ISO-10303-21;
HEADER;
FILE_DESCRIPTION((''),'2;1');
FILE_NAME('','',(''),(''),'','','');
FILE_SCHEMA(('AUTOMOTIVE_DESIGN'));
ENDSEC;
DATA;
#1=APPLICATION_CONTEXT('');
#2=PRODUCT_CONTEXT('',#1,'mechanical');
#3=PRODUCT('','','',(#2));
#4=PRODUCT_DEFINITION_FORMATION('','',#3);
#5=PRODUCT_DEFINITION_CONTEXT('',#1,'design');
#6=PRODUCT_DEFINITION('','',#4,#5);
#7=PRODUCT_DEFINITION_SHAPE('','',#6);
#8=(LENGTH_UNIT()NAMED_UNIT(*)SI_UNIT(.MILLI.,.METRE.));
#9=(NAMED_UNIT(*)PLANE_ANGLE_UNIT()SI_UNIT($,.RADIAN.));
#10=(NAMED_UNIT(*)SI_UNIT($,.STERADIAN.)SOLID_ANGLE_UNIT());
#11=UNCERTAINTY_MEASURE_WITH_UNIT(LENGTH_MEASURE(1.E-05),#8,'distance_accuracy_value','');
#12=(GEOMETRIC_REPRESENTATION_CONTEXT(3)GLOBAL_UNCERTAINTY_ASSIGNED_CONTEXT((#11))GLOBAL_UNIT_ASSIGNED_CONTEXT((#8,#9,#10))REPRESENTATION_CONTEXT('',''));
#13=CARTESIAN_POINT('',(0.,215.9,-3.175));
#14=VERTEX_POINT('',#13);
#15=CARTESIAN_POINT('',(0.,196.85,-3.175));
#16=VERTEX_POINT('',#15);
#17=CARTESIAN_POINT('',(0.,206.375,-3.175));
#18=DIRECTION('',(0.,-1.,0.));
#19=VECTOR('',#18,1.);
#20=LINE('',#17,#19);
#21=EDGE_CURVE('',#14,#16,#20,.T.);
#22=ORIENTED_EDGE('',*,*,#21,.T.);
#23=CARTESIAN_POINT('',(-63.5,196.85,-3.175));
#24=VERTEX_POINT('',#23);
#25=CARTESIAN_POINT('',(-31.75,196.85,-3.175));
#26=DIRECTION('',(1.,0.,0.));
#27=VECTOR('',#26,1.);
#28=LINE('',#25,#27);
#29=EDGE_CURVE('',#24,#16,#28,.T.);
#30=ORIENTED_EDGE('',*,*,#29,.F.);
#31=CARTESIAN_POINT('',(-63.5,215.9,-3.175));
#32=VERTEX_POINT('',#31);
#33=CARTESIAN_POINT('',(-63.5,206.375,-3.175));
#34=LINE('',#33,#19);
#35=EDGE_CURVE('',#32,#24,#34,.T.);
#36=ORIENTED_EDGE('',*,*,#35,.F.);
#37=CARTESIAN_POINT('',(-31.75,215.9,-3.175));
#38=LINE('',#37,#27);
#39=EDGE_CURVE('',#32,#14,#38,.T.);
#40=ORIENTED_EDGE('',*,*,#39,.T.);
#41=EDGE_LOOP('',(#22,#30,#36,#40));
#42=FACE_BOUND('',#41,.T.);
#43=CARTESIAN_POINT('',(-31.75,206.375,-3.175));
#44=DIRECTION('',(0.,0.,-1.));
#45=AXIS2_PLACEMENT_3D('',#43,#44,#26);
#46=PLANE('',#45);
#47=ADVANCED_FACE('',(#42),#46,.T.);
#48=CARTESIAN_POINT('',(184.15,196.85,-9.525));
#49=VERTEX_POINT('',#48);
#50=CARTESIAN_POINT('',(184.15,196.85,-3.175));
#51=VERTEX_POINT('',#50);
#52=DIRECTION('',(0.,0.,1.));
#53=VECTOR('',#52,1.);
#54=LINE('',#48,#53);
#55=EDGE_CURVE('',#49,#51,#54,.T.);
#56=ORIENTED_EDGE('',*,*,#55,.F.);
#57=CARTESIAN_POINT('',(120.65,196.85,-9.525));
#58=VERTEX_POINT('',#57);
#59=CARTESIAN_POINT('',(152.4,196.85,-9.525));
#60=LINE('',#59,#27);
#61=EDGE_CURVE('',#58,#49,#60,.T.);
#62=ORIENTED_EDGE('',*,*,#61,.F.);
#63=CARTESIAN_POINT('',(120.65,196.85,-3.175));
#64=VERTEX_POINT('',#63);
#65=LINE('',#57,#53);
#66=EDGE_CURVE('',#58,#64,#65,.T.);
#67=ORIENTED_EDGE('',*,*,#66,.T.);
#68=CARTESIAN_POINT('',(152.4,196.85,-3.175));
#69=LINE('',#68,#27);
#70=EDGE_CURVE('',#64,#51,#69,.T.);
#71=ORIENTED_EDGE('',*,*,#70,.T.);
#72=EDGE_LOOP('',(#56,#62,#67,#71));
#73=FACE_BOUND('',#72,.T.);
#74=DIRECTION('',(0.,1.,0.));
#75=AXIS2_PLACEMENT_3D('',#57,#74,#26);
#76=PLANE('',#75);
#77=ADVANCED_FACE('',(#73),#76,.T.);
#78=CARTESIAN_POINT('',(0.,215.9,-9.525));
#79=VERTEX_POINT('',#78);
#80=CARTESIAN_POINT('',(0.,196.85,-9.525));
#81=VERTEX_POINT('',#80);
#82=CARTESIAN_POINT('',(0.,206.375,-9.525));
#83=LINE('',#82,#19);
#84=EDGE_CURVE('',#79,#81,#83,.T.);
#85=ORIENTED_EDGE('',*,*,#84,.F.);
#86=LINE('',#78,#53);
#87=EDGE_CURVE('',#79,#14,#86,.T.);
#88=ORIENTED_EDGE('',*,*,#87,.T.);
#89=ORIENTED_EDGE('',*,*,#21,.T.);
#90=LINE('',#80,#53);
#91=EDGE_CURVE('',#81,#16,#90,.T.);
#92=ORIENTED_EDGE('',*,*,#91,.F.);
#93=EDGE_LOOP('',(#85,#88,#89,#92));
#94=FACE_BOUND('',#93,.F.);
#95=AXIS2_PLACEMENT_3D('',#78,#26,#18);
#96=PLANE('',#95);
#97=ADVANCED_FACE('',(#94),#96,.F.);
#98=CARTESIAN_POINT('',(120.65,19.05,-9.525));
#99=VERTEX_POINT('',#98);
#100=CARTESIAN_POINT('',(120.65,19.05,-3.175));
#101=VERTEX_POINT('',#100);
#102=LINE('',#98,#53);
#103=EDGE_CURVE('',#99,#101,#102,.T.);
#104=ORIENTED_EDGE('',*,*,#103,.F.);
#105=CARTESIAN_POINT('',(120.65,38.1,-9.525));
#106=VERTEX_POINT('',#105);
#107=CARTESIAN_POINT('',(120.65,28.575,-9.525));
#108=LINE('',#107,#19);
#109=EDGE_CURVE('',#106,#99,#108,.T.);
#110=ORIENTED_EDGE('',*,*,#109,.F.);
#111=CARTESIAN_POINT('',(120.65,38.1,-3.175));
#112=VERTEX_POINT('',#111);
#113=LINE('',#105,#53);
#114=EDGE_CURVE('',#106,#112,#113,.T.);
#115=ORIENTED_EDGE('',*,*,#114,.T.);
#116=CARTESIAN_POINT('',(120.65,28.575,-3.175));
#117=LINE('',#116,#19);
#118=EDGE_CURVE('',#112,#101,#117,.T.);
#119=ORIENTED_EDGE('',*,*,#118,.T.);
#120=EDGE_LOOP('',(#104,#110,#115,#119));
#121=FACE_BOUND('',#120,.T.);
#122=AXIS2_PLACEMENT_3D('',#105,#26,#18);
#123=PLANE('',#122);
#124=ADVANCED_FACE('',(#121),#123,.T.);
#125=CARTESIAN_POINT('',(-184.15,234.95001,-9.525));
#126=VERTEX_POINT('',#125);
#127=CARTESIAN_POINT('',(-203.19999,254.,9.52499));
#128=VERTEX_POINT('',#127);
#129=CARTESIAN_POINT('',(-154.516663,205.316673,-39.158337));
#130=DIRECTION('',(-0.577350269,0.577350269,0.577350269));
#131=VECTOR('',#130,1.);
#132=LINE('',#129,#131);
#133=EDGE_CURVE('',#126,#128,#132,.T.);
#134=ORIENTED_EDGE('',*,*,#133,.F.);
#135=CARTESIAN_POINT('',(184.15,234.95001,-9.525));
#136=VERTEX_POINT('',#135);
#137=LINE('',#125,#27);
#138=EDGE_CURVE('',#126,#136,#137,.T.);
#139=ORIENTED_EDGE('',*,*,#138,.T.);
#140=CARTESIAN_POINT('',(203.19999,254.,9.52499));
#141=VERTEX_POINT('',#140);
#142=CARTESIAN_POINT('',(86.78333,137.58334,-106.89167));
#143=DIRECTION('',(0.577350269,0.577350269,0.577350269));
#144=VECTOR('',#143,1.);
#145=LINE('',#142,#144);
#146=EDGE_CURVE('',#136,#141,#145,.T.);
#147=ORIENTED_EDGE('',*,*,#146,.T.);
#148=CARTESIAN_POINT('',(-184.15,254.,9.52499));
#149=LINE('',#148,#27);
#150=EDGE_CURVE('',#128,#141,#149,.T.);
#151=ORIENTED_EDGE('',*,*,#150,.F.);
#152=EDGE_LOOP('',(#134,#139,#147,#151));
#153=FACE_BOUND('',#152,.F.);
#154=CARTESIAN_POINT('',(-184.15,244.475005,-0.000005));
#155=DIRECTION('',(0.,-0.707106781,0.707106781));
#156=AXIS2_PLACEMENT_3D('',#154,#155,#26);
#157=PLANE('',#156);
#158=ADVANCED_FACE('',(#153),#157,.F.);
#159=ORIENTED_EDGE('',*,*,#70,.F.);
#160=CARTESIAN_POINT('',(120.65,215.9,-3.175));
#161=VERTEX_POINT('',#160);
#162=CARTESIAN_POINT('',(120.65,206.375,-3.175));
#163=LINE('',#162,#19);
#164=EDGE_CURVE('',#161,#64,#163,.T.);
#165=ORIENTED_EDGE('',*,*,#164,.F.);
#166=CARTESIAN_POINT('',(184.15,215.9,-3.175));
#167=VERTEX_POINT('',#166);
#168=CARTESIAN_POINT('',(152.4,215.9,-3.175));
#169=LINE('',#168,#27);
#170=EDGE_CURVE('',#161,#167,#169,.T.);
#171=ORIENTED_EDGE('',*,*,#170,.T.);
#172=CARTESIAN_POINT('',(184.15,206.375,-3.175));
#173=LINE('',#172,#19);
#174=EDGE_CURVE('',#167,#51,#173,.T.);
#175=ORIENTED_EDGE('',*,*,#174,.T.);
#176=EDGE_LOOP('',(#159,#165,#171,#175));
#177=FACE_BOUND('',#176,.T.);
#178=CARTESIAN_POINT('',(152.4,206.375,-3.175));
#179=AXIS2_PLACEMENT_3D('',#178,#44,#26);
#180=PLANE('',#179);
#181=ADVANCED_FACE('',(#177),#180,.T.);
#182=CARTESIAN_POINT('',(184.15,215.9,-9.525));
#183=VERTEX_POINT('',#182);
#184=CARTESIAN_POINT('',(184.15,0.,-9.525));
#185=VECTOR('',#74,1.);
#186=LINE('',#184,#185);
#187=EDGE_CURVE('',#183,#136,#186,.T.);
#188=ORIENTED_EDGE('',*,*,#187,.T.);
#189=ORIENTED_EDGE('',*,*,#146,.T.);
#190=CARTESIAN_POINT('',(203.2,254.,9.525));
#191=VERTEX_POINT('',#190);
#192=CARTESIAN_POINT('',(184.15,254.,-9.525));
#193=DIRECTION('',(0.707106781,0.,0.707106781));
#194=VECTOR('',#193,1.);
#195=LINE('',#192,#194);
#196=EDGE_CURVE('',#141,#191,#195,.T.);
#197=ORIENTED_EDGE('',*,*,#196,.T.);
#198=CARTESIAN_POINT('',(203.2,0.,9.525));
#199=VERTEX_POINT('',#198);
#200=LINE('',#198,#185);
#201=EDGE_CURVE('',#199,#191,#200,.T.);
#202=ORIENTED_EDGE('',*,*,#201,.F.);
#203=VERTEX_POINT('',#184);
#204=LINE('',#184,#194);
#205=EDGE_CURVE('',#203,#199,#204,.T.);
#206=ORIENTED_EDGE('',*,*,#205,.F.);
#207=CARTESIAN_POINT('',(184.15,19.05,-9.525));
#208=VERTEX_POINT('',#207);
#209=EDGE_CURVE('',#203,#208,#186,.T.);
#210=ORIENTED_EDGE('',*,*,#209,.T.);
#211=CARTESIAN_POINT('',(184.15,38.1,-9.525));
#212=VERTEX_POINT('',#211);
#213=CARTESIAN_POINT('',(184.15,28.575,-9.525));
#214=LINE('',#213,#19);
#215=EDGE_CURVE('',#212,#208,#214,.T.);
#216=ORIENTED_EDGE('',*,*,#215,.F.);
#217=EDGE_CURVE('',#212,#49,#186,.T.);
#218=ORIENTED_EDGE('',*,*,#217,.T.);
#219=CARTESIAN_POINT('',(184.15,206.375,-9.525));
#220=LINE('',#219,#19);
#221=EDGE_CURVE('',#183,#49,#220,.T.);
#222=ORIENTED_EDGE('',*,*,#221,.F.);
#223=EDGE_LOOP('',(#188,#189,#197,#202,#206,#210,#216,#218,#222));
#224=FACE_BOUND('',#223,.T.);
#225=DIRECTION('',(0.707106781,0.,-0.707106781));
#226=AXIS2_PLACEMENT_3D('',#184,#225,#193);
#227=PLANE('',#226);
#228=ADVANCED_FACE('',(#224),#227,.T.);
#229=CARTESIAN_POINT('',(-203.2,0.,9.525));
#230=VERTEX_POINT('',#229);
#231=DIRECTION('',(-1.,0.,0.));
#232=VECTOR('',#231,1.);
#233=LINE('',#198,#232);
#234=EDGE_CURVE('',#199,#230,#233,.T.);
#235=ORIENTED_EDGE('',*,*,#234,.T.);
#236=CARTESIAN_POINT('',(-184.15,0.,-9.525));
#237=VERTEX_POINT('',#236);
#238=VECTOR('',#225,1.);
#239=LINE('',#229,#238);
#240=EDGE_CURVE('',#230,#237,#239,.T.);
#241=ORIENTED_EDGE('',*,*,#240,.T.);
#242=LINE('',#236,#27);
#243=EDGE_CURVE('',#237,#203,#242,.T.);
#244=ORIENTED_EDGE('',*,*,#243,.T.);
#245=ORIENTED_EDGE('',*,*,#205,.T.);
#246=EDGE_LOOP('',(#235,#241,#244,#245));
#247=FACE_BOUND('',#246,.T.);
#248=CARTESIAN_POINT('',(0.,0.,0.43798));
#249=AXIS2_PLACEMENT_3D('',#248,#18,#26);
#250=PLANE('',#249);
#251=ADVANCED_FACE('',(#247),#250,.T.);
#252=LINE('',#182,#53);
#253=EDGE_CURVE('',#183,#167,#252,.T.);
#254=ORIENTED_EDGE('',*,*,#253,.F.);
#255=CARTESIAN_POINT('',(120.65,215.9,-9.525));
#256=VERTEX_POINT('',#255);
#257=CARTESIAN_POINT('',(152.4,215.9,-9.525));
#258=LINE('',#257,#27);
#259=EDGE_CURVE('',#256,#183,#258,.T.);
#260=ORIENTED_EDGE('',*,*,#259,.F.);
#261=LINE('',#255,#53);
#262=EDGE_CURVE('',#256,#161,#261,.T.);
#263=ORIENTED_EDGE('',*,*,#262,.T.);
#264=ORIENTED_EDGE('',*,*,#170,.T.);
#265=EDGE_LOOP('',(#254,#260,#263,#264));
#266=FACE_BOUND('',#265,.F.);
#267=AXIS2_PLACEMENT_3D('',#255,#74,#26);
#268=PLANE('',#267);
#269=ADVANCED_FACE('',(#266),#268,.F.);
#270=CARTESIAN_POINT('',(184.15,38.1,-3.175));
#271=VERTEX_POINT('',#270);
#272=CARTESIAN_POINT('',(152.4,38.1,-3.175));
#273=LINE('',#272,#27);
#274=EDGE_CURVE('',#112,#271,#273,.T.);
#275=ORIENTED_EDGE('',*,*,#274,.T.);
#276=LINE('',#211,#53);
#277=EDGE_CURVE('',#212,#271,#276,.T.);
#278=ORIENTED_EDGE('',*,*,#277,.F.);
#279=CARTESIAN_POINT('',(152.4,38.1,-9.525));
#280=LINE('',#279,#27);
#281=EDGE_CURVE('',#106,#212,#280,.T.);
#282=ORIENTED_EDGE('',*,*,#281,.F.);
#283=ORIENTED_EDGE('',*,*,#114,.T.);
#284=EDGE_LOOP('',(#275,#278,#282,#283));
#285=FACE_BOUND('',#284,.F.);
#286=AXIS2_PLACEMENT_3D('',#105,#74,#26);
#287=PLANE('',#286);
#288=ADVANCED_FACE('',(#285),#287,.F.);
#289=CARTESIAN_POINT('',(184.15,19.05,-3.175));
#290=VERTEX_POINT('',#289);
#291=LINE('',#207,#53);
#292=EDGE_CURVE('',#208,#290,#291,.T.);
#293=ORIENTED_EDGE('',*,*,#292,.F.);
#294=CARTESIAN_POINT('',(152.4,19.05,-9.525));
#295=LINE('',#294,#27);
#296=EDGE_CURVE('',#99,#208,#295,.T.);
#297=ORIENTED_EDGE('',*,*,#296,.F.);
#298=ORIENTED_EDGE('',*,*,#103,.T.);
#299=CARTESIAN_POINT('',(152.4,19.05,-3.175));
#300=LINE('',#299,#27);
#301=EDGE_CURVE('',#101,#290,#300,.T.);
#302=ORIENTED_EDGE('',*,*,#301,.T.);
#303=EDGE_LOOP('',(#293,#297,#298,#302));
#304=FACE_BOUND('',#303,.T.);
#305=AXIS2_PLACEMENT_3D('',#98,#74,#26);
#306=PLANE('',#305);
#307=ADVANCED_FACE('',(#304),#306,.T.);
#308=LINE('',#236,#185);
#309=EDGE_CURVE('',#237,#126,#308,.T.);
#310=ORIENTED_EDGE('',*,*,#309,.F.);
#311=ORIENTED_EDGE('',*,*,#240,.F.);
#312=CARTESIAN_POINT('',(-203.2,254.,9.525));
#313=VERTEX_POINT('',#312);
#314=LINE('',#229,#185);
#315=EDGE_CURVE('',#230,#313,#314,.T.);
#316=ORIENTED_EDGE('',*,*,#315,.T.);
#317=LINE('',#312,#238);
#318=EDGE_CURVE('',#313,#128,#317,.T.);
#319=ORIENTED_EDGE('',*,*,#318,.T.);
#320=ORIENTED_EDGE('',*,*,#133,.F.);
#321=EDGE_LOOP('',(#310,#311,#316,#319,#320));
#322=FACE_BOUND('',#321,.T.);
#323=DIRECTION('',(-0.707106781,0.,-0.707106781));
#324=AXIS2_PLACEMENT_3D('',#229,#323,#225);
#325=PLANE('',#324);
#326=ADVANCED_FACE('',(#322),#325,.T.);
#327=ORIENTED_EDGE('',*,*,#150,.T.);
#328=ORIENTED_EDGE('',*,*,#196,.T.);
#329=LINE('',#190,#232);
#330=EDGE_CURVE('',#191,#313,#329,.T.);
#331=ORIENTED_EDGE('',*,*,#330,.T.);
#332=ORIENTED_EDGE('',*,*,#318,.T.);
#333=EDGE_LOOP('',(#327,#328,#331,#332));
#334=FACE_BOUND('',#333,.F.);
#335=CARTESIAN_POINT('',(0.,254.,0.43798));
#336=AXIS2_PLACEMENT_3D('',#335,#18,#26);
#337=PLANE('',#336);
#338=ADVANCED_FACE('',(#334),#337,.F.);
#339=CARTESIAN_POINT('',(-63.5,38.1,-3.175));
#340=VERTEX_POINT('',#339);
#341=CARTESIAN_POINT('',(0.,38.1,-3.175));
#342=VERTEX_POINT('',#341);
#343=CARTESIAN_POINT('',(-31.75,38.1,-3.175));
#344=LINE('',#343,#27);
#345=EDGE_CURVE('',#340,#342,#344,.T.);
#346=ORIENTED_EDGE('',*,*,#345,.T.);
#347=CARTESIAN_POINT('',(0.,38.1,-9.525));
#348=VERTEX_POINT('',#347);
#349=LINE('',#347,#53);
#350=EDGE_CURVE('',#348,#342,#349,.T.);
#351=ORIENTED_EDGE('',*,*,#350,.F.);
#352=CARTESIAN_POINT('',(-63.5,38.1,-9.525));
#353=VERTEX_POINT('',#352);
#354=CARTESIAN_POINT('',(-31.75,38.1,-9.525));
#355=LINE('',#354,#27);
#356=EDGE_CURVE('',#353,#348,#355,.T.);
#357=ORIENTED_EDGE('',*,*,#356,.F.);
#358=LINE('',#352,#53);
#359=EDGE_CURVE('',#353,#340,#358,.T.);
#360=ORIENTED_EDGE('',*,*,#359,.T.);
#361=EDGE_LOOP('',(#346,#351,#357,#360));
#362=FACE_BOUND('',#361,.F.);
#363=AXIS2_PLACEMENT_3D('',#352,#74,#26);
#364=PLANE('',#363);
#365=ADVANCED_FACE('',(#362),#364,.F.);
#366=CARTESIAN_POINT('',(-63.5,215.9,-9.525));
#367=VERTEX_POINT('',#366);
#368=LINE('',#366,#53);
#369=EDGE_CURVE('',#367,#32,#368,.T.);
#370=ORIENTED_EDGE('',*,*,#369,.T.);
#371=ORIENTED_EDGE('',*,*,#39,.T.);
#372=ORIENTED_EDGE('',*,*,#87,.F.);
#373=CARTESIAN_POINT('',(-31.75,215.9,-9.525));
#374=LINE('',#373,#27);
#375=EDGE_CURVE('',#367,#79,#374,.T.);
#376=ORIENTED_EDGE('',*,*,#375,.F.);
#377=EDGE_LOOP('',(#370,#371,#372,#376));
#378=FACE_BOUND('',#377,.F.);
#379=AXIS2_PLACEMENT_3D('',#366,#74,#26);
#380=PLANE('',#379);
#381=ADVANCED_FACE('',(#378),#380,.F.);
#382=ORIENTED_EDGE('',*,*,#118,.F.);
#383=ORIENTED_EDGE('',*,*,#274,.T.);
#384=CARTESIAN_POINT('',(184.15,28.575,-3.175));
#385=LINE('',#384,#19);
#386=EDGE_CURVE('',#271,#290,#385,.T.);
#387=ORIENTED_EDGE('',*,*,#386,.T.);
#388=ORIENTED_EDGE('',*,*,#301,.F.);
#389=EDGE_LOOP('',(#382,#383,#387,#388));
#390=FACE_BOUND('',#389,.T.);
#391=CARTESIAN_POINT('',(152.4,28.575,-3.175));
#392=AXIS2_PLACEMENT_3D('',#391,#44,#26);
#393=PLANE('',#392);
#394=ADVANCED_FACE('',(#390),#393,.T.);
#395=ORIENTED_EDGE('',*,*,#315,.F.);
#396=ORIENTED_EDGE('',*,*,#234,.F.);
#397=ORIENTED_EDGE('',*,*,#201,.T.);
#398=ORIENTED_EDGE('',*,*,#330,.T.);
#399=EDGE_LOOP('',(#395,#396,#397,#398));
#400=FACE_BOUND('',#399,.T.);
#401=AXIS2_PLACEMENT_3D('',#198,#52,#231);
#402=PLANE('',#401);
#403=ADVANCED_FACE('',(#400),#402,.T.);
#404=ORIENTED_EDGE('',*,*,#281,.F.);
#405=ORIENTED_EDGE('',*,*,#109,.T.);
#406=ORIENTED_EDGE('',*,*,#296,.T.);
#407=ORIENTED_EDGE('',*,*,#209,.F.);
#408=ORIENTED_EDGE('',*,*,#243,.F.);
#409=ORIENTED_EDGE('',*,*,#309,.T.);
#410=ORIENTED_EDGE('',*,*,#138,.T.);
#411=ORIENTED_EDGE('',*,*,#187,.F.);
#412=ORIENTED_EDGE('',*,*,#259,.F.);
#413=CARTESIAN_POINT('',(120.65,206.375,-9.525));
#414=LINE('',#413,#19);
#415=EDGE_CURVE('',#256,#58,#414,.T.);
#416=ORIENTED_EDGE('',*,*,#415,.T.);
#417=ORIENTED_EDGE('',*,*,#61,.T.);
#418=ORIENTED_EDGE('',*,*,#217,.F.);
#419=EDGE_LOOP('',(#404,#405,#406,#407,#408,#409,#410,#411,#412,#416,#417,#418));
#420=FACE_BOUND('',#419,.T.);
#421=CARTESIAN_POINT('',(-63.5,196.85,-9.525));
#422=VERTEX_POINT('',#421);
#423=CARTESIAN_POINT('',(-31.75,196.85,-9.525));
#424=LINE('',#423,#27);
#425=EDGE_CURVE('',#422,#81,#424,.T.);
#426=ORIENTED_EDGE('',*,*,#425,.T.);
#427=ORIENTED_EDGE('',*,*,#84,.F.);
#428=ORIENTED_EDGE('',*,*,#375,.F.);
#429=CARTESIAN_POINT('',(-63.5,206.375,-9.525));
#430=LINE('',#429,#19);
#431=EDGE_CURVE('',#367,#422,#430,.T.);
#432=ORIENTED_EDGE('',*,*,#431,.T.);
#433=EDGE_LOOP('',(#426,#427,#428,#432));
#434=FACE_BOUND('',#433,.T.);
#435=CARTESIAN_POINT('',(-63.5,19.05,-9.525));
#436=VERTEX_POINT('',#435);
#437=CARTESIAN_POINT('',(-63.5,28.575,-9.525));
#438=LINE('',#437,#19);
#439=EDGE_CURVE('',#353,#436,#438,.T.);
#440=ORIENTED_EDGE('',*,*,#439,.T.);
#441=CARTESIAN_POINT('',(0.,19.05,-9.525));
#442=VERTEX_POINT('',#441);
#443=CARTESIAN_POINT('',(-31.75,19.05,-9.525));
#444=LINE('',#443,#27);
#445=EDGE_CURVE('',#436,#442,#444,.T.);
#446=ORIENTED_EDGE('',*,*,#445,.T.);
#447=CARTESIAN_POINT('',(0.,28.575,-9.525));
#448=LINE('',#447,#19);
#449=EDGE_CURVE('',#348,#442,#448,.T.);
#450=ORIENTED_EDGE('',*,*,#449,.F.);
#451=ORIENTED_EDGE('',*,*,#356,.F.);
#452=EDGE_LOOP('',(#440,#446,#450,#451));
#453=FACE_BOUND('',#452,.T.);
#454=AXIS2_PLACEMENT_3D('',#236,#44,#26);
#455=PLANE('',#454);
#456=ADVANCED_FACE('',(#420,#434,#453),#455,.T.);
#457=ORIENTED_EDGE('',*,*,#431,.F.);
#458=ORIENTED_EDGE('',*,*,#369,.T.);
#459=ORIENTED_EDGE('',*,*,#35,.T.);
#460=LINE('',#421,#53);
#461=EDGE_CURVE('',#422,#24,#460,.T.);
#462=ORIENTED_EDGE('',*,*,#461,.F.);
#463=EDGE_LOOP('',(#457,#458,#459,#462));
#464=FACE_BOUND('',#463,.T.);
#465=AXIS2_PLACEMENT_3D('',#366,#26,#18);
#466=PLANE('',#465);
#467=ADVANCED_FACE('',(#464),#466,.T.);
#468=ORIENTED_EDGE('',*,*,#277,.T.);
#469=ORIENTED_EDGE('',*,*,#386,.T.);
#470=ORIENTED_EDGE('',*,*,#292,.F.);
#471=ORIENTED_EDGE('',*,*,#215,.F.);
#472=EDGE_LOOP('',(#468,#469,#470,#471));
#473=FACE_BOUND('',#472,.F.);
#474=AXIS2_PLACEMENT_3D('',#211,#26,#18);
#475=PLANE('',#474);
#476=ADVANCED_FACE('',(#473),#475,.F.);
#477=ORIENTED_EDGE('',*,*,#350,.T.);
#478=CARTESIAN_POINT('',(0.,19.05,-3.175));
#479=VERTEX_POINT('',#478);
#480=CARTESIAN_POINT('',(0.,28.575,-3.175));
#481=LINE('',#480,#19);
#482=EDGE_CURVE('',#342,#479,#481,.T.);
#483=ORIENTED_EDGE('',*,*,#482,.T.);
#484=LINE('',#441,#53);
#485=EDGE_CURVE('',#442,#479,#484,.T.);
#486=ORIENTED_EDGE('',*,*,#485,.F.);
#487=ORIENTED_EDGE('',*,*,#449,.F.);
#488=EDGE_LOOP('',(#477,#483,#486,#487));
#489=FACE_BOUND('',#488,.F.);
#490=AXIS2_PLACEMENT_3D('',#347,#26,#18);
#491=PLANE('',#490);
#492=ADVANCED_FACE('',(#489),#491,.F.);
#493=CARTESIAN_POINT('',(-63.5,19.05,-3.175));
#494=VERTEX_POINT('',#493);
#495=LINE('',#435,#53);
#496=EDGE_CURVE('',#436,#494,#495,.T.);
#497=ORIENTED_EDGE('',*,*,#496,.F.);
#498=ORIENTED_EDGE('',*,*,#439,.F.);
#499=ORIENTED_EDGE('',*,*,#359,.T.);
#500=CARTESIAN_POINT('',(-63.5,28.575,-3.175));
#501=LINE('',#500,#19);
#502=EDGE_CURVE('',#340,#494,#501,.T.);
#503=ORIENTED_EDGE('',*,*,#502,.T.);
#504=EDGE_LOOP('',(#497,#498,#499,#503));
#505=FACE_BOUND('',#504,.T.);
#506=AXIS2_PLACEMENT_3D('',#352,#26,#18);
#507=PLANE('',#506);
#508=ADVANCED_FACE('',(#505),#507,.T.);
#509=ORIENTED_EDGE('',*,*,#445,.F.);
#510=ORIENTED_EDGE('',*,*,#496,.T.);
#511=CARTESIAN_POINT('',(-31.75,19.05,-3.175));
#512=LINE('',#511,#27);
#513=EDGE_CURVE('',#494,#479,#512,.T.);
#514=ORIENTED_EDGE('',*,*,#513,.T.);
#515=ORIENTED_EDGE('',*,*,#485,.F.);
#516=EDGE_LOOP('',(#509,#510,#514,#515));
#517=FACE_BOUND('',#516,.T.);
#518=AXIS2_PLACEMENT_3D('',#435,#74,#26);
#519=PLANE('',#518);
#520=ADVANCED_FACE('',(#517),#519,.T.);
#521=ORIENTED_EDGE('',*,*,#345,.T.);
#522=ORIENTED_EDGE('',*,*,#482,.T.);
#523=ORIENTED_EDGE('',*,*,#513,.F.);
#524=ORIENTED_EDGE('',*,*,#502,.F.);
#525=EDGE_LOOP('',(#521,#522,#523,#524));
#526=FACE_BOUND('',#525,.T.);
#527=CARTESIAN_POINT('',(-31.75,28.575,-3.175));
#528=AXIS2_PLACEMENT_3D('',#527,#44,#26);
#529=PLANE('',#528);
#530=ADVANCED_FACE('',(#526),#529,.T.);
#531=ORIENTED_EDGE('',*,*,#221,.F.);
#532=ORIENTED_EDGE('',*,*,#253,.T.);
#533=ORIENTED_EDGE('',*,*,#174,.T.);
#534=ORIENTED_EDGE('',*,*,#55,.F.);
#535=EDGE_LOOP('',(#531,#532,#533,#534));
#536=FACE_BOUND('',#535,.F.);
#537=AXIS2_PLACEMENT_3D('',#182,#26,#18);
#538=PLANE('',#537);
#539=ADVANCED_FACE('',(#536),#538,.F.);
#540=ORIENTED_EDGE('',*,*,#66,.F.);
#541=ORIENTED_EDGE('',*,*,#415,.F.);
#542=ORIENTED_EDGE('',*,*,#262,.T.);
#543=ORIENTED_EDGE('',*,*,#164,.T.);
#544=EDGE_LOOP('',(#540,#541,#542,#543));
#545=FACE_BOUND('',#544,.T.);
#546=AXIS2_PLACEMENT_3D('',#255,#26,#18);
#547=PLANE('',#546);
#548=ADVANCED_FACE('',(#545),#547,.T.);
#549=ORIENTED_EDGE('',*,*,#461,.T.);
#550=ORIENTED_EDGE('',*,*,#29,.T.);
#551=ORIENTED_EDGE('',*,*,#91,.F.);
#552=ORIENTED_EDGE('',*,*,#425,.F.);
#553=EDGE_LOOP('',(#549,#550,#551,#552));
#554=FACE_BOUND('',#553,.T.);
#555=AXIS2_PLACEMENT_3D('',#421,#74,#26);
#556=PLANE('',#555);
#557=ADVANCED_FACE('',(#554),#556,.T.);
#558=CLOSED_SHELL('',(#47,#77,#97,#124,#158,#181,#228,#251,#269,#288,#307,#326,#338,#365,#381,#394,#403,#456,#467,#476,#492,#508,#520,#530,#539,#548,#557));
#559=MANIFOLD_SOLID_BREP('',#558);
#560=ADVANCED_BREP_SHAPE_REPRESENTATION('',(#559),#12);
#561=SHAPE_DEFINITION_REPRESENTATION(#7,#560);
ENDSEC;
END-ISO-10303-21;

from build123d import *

# Parameters (mm, degrees)
F1_DEPTH = 254
F2_SIZE  = 19.04999
F3_W     = 63.5
F3_H     = 19.05
F4_DEPTH = 6.35


# Not quite as in the source:
# - a fillet or chamfer is up to 0.001 mm smaller than in the source, because OpenCascade refuses the exact size


with BuildPart() as f1:
    # F0 (on Front) → F1 (new body)
    with BuildSketch(Plane.XZ):
        Polygon((203.2, 9.525), (-203.2, 9.525), (-184.15, -9.525), (184.15, -9.525), align=None)
    extrude(amount=-F1_DEPTH)

    # F2 (size 19.05 in the source; OpenCascade refuses exactly that, so slightly less here)
    f2_edges = [f1.edges().sort_by_distance(p)[0] for p in [
        (0, 254, -9.525),
    ]]
    chamfer(f2_edges, length=F2_SIZE)

    # F3 (on face) → F4 (cut)
    with BuildSketch(Plane(origin=(0, 0, -9.525), x_dir=(1, 0, 0), z_dir=(0, 0, -1))):
        with Locations((-31.75, -206.375)):
            Rectangle(F3_W, F3_H)
        with Locations((-31.75, -28.575)):
            Rectangle(F3_W, F3_H)
        with Locations((152.4, -28.575)):
            Rectangle(F3_W, F3_H)
        with Locations((152.4, -206.375)):
            Rectangle(F3_W, F3_H)
    extrude(amount=-F4_DEPTH, mode=Mode.SUBTRACT)


solid = f1.part
